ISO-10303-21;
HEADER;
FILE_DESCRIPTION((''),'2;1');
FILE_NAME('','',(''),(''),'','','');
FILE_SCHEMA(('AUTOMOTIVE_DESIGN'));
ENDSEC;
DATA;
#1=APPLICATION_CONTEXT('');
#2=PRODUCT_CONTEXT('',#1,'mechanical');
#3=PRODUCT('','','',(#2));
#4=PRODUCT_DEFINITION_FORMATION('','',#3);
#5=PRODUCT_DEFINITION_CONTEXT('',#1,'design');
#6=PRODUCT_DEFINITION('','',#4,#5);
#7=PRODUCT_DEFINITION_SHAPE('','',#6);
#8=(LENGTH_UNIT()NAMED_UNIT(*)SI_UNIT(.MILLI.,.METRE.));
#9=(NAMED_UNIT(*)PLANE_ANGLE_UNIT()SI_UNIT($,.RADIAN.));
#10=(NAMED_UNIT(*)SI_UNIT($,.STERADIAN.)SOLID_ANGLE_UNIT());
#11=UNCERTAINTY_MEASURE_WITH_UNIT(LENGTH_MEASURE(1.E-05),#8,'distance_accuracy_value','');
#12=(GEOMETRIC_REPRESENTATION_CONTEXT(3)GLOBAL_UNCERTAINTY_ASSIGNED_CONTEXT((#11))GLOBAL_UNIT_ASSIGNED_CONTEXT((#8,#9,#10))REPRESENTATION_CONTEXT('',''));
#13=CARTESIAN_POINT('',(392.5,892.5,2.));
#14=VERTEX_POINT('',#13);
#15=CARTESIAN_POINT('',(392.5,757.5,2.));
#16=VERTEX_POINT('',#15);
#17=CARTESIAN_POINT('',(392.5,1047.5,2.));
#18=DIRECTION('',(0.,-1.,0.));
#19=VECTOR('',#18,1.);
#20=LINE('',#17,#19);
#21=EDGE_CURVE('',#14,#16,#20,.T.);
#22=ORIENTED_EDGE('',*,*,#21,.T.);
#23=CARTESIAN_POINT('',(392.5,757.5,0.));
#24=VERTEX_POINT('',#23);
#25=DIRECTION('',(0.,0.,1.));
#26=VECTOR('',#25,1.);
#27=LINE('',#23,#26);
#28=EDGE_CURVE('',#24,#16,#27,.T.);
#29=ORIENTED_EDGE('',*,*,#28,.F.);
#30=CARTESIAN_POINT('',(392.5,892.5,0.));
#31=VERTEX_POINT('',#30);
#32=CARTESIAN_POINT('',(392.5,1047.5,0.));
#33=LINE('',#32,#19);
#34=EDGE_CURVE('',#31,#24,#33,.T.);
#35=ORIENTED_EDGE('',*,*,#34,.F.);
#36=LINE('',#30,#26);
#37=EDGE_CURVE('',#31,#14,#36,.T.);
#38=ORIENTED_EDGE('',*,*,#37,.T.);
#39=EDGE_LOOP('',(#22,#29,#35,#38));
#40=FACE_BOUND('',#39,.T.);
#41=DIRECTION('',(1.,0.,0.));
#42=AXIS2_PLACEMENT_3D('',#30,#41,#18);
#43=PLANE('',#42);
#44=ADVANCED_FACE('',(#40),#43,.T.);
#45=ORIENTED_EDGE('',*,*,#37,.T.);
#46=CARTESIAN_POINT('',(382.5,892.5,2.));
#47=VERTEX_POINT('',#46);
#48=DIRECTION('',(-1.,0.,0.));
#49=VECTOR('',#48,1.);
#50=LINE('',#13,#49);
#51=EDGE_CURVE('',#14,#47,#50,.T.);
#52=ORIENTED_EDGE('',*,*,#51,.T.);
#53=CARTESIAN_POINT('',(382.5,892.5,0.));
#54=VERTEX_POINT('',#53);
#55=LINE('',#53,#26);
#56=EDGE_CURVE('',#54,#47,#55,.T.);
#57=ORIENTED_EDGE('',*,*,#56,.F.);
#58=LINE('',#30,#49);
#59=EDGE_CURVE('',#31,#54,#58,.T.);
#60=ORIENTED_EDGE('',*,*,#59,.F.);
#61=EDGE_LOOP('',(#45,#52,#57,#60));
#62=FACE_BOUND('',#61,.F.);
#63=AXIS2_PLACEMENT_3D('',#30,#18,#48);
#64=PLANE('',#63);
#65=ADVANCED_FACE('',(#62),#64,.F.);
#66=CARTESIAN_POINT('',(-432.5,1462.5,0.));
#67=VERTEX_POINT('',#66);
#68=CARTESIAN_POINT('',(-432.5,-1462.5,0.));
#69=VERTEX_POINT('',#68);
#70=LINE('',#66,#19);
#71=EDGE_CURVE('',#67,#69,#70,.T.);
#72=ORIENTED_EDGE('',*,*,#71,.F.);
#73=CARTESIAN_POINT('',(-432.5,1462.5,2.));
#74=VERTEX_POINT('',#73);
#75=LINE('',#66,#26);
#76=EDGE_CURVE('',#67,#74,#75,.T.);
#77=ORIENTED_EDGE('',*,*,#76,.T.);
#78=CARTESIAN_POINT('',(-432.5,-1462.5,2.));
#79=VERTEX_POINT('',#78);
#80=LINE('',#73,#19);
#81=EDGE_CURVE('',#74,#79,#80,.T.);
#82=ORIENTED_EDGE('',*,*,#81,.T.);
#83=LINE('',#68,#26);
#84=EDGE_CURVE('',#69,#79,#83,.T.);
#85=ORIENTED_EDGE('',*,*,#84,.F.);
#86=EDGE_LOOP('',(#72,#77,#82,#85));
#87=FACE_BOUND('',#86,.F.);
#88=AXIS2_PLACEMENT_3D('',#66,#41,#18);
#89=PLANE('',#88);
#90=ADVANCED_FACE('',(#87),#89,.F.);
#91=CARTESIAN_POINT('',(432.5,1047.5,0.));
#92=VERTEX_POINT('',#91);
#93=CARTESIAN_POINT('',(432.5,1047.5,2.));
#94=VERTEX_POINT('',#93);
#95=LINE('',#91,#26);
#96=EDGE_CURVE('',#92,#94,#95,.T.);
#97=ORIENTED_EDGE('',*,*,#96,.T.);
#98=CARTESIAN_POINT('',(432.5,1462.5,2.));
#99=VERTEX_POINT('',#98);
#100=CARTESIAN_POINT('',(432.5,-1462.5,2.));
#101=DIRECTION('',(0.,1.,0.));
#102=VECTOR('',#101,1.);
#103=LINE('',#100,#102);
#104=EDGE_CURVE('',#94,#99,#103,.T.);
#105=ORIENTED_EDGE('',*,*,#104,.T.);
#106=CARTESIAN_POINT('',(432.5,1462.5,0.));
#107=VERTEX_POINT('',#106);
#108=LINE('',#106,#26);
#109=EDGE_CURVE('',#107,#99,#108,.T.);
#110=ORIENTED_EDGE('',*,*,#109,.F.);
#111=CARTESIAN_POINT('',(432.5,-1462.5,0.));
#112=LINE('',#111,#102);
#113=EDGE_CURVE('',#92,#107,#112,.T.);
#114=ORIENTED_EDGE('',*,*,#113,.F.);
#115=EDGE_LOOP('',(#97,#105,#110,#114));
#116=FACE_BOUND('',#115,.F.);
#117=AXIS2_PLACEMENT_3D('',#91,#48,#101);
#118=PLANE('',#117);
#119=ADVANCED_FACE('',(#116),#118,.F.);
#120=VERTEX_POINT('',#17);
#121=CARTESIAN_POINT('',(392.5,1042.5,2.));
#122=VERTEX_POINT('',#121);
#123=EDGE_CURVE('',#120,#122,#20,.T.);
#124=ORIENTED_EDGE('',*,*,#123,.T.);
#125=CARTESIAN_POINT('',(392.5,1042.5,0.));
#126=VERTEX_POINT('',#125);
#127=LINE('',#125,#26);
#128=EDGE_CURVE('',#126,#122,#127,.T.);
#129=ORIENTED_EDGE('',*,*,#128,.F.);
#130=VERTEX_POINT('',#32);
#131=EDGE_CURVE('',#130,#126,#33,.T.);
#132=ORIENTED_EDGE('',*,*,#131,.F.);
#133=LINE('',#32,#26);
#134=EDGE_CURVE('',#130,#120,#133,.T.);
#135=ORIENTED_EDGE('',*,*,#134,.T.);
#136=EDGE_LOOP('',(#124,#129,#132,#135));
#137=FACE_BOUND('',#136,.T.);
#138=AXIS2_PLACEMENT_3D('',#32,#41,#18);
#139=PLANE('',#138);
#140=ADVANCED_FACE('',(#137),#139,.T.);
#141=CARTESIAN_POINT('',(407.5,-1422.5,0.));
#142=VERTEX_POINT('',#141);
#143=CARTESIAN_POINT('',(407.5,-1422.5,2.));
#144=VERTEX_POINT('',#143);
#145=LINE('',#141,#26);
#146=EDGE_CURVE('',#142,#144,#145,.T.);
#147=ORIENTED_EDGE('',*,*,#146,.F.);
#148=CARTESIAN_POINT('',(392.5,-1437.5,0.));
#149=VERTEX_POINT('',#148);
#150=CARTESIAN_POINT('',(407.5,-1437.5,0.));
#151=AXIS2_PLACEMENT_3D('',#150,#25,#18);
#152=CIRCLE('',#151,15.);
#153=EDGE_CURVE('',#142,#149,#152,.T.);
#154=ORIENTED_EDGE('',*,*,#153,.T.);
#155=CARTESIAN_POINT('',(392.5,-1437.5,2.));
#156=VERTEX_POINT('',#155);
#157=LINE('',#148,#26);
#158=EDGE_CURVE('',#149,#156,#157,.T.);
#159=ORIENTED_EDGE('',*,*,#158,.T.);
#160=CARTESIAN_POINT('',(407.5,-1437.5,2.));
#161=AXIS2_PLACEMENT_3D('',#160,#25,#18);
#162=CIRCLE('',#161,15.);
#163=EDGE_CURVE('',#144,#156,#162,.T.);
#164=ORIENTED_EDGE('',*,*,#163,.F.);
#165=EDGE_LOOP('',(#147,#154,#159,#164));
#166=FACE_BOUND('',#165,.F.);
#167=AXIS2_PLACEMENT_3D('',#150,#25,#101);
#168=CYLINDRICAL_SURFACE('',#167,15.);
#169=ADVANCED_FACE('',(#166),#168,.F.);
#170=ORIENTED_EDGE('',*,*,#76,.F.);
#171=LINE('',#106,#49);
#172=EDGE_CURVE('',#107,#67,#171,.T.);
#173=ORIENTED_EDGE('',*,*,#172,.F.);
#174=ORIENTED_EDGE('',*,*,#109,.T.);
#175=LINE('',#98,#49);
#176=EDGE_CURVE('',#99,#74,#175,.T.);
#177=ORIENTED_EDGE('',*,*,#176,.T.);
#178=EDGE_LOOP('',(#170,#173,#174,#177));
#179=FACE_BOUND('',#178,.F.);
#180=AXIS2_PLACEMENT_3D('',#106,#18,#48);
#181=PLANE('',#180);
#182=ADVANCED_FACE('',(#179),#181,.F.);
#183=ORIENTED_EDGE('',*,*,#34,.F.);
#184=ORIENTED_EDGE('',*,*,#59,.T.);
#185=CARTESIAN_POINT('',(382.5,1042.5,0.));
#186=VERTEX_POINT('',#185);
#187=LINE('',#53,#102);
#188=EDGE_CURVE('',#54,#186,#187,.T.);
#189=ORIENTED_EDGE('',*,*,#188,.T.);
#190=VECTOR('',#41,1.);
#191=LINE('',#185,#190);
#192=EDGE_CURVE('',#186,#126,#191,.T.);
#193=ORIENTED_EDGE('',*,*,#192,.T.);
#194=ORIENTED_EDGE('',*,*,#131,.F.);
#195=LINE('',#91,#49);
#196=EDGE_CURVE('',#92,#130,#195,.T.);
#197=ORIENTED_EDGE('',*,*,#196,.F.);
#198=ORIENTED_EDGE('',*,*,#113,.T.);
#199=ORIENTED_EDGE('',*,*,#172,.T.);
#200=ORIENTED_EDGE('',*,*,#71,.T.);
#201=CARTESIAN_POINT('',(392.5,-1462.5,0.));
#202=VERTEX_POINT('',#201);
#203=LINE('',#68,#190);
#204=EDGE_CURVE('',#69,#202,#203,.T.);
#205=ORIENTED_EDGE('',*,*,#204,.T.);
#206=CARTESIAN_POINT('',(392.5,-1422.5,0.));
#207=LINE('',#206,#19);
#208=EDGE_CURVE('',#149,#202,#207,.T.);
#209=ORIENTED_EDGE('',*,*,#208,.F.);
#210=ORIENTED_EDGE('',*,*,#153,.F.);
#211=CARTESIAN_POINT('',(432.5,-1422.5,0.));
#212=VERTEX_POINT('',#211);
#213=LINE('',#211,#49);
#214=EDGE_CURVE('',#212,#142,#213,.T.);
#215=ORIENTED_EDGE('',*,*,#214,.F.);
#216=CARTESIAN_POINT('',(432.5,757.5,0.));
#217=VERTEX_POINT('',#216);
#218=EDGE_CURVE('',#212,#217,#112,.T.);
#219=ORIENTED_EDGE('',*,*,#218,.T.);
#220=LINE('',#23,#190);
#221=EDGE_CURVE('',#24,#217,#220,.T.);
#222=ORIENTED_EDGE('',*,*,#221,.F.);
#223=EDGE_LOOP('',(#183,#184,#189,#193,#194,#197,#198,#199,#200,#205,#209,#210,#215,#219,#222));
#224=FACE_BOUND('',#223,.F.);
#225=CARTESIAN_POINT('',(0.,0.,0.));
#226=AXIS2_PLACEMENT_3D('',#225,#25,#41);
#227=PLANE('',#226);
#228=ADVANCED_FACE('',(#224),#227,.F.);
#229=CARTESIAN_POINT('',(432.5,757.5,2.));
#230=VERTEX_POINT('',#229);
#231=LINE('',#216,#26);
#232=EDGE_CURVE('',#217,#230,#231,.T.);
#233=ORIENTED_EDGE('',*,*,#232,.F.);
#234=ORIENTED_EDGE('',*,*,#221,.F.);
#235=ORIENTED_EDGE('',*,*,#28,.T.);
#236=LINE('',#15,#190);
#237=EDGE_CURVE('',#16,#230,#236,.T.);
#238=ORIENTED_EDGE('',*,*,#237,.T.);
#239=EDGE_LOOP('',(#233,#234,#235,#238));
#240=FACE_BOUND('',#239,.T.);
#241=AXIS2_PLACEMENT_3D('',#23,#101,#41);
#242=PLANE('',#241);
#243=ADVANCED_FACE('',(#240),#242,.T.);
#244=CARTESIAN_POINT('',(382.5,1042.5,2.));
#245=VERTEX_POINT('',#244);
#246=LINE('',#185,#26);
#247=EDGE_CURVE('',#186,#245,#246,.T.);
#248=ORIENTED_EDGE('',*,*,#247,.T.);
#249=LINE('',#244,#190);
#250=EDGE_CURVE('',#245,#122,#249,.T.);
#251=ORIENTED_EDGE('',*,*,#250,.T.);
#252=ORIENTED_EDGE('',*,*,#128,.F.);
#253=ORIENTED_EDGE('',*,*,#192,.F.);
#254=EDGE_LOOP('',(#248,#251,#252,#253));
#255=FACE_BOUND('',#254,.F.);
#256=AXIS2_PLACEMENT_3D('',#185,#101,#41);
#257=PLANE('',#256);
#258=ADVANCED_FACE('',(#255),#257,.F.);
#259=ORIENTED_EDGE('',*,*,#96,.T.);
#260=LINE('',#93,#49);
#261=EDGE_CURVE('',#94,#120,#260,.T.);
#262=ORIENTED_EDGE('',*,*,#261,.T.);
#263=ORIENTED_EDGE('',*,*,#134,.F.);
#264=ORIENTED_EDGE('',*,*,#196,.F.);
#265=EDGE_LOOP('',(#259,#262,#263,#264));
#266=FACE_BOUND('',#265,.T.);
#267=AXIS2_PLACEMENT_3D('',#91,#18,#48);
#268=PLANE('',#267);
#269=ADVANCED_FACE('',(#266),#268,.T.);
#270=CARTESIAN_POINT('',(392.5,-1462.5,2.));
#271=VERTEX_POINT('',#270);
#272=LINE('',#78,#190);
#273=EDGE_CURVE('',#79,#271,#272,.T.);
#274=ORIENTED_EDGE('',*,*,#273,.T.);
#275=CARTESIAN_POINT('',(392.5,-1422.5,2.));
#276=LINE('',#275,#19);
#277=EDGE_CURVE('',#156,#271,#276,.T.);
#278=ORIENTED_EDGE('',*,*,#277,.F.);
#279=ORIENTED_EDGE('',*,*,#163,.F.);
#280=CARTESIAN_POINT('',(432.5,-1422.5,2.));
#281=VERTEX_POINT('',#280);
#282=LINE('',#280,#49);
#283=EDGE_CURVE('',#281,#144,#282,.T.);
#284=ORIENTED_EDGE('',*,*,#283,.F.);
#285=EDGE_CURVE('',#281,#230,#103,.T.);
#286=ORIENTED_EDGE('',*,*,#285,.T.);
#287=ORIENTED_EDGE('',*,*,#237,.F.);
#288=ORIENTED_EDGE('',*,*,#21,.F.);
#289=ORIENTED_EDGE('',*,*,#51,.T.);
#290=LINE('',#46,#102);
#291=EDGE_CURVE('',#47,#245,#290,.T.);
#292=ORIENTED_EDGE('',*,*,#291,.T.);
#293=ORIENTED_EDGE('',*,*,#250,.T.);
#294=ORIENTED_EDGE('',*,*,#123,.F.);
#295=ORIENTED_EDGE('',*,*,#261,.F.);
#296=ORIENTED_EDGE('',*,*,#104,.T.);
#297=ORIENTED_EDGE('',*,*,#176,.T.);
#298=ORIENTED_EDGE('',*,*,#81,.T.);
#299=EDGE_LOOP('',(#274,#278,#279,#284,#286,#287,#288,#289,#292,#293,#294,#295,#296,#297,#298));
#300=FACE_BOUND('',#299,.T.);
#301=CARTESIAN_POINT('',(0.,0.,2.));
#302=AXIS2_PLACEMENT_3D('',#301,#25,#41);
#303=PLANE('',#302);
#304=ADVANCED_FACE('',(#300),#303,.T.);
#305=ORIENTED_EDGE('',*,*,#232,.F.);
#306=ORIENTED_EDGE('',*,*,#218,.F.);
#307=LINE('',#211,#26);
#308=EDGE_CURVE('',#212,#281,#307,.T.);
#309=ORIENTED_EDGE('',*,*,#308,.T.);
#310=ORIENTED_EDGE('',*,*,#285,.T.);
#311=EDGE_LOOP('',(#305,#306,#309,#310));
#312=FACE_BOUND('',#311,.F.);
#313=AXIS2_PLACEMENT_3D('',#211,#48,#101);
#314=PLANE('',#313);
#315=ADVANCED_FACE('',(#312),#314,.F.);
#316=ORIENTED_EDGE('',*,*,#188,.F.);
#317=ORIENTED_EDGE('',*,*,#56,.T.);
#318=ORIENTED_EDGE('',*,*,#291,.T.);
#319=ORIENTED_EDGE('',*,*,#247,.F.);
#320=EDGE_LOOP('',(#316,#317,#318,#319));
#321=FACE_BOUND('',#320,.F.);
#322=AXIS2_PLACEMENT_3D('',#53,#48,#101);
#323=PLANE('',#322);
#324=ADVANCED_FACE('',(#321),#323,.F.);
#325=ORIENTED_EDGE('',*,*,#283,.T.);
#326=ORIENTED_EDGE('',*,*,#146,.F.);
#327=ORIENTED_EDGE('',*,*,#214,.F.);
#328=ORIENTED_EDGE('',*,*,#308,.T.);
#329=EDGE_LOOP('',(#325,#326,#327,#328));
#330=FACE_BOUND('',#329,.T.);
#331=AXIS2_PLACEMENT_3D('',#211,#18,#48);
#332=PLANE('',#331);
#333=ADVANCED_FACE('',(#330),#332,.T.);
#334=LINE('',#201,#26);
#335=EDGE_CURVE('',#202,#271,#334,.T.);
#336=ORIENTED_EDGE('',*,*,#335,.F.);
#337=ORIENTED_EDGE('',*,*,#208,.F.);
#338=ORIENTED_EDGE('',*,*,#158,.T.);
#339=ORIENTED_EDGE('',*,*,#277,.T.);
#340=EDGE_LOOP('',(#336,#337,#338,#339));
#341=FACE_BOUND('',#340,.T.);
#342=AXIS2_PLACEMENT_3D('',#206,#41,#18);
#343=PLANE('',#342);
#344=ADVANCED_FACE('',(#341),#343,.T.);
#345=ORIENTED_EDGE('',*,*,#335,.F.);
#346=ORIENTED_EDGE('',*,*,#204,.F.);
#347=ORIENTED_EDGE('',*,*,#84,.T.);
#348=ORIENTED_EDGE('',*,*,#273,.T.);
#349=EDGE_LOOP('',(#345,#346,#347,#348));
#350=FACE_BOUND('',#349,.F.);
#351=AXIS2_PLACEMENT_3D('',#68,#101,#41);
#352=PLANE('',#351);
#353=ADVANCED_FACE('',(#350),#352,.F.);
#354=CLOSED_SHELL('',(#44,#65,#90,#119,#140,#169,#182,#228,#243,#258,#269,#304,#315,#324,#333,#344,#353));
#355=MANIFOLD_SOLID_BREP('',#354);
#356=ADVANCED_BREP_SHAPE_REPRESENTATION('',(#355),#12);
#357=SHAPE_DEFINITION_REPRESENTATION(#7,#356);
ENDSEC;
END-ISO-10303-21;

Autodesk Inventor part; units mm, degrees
ref_plane "YZ Plane" through (0, 0, 0) normal (1, 0, 0) x (0, 1, 0)
ref_plane "XZ Plane" through (0, 0, 0) normal (0, 1, 0) x (-1, 0, 0)
ref_plane "XY Plane" through (0, 0, 0) normal (0, 0, 1) x (1, 0, 0)
sketch "Sketch1" plane through (0, 0, 0) normal (0, 0, 1) x (1, 0, 0)
  line L0 (-432.5, -1462.5) -> (432.5, -1462.5)
  line L1 (432.5, -1462.5) -> (432.5, 1462.5)
  line L2 (432.5, 1462.5) -> (-432.5, 1462.5)
  line L3 (-432.5, 1462.5) -> (-432.5, -1462.5)
  line L4 (-432.5, -1462.5) -> (432.5, 1462.5) construction
  line L5 (432.5, -1462.5) -> (-432.5, 1462.5) construction
  line L6 (432.5, -1422.5) -> (392.5, -1422.5)
  line L7 (392.5, -1422.5) -> (392.5, -1462.5)
  line L8 (432.5, 1047.5) -> (392.5, 1047.5)
  line L9 (392.5, 1047.5) -> (392.5, 757.5)
  line L10 (392.5, 757.5) -> (432.5, 757.5)
  line L11 (432.5, 757.5) -> (432.5, 1047.5)
  line L12 (392.5, 892.5) -> (382.5, 892.5)
  line L13 (382.5, 892.5) -> (382.5, 1042.5)
  line L14 (382.5, 1042.5) -> (392.5, 1042.5)
  point P0 (0, 0)
  point P1 (432.5, 757.5)
  dimension "d154" = 865
  dimension "d155" = 2925
  dimension "d157" = 40
  dimension "d159" = 290
  dimension "d161" = 40
  dimension "d162" = 2220
  dimension "d163" = 10
  dimension "d164" = 150
  dimension "d165" = 5
extrude "Plate5" add sketch "Sketch1" along normal blind 2 contours L3 L2 L1 L8 L9 L14 L13 L12 L10 L6 L7 L0
fillet "Corner Round1" radius 15 1 edges at (392.5, -1422.5, 1)
properties part number "PNS-0114 floor sheet 41" material "Stainless Steel"
